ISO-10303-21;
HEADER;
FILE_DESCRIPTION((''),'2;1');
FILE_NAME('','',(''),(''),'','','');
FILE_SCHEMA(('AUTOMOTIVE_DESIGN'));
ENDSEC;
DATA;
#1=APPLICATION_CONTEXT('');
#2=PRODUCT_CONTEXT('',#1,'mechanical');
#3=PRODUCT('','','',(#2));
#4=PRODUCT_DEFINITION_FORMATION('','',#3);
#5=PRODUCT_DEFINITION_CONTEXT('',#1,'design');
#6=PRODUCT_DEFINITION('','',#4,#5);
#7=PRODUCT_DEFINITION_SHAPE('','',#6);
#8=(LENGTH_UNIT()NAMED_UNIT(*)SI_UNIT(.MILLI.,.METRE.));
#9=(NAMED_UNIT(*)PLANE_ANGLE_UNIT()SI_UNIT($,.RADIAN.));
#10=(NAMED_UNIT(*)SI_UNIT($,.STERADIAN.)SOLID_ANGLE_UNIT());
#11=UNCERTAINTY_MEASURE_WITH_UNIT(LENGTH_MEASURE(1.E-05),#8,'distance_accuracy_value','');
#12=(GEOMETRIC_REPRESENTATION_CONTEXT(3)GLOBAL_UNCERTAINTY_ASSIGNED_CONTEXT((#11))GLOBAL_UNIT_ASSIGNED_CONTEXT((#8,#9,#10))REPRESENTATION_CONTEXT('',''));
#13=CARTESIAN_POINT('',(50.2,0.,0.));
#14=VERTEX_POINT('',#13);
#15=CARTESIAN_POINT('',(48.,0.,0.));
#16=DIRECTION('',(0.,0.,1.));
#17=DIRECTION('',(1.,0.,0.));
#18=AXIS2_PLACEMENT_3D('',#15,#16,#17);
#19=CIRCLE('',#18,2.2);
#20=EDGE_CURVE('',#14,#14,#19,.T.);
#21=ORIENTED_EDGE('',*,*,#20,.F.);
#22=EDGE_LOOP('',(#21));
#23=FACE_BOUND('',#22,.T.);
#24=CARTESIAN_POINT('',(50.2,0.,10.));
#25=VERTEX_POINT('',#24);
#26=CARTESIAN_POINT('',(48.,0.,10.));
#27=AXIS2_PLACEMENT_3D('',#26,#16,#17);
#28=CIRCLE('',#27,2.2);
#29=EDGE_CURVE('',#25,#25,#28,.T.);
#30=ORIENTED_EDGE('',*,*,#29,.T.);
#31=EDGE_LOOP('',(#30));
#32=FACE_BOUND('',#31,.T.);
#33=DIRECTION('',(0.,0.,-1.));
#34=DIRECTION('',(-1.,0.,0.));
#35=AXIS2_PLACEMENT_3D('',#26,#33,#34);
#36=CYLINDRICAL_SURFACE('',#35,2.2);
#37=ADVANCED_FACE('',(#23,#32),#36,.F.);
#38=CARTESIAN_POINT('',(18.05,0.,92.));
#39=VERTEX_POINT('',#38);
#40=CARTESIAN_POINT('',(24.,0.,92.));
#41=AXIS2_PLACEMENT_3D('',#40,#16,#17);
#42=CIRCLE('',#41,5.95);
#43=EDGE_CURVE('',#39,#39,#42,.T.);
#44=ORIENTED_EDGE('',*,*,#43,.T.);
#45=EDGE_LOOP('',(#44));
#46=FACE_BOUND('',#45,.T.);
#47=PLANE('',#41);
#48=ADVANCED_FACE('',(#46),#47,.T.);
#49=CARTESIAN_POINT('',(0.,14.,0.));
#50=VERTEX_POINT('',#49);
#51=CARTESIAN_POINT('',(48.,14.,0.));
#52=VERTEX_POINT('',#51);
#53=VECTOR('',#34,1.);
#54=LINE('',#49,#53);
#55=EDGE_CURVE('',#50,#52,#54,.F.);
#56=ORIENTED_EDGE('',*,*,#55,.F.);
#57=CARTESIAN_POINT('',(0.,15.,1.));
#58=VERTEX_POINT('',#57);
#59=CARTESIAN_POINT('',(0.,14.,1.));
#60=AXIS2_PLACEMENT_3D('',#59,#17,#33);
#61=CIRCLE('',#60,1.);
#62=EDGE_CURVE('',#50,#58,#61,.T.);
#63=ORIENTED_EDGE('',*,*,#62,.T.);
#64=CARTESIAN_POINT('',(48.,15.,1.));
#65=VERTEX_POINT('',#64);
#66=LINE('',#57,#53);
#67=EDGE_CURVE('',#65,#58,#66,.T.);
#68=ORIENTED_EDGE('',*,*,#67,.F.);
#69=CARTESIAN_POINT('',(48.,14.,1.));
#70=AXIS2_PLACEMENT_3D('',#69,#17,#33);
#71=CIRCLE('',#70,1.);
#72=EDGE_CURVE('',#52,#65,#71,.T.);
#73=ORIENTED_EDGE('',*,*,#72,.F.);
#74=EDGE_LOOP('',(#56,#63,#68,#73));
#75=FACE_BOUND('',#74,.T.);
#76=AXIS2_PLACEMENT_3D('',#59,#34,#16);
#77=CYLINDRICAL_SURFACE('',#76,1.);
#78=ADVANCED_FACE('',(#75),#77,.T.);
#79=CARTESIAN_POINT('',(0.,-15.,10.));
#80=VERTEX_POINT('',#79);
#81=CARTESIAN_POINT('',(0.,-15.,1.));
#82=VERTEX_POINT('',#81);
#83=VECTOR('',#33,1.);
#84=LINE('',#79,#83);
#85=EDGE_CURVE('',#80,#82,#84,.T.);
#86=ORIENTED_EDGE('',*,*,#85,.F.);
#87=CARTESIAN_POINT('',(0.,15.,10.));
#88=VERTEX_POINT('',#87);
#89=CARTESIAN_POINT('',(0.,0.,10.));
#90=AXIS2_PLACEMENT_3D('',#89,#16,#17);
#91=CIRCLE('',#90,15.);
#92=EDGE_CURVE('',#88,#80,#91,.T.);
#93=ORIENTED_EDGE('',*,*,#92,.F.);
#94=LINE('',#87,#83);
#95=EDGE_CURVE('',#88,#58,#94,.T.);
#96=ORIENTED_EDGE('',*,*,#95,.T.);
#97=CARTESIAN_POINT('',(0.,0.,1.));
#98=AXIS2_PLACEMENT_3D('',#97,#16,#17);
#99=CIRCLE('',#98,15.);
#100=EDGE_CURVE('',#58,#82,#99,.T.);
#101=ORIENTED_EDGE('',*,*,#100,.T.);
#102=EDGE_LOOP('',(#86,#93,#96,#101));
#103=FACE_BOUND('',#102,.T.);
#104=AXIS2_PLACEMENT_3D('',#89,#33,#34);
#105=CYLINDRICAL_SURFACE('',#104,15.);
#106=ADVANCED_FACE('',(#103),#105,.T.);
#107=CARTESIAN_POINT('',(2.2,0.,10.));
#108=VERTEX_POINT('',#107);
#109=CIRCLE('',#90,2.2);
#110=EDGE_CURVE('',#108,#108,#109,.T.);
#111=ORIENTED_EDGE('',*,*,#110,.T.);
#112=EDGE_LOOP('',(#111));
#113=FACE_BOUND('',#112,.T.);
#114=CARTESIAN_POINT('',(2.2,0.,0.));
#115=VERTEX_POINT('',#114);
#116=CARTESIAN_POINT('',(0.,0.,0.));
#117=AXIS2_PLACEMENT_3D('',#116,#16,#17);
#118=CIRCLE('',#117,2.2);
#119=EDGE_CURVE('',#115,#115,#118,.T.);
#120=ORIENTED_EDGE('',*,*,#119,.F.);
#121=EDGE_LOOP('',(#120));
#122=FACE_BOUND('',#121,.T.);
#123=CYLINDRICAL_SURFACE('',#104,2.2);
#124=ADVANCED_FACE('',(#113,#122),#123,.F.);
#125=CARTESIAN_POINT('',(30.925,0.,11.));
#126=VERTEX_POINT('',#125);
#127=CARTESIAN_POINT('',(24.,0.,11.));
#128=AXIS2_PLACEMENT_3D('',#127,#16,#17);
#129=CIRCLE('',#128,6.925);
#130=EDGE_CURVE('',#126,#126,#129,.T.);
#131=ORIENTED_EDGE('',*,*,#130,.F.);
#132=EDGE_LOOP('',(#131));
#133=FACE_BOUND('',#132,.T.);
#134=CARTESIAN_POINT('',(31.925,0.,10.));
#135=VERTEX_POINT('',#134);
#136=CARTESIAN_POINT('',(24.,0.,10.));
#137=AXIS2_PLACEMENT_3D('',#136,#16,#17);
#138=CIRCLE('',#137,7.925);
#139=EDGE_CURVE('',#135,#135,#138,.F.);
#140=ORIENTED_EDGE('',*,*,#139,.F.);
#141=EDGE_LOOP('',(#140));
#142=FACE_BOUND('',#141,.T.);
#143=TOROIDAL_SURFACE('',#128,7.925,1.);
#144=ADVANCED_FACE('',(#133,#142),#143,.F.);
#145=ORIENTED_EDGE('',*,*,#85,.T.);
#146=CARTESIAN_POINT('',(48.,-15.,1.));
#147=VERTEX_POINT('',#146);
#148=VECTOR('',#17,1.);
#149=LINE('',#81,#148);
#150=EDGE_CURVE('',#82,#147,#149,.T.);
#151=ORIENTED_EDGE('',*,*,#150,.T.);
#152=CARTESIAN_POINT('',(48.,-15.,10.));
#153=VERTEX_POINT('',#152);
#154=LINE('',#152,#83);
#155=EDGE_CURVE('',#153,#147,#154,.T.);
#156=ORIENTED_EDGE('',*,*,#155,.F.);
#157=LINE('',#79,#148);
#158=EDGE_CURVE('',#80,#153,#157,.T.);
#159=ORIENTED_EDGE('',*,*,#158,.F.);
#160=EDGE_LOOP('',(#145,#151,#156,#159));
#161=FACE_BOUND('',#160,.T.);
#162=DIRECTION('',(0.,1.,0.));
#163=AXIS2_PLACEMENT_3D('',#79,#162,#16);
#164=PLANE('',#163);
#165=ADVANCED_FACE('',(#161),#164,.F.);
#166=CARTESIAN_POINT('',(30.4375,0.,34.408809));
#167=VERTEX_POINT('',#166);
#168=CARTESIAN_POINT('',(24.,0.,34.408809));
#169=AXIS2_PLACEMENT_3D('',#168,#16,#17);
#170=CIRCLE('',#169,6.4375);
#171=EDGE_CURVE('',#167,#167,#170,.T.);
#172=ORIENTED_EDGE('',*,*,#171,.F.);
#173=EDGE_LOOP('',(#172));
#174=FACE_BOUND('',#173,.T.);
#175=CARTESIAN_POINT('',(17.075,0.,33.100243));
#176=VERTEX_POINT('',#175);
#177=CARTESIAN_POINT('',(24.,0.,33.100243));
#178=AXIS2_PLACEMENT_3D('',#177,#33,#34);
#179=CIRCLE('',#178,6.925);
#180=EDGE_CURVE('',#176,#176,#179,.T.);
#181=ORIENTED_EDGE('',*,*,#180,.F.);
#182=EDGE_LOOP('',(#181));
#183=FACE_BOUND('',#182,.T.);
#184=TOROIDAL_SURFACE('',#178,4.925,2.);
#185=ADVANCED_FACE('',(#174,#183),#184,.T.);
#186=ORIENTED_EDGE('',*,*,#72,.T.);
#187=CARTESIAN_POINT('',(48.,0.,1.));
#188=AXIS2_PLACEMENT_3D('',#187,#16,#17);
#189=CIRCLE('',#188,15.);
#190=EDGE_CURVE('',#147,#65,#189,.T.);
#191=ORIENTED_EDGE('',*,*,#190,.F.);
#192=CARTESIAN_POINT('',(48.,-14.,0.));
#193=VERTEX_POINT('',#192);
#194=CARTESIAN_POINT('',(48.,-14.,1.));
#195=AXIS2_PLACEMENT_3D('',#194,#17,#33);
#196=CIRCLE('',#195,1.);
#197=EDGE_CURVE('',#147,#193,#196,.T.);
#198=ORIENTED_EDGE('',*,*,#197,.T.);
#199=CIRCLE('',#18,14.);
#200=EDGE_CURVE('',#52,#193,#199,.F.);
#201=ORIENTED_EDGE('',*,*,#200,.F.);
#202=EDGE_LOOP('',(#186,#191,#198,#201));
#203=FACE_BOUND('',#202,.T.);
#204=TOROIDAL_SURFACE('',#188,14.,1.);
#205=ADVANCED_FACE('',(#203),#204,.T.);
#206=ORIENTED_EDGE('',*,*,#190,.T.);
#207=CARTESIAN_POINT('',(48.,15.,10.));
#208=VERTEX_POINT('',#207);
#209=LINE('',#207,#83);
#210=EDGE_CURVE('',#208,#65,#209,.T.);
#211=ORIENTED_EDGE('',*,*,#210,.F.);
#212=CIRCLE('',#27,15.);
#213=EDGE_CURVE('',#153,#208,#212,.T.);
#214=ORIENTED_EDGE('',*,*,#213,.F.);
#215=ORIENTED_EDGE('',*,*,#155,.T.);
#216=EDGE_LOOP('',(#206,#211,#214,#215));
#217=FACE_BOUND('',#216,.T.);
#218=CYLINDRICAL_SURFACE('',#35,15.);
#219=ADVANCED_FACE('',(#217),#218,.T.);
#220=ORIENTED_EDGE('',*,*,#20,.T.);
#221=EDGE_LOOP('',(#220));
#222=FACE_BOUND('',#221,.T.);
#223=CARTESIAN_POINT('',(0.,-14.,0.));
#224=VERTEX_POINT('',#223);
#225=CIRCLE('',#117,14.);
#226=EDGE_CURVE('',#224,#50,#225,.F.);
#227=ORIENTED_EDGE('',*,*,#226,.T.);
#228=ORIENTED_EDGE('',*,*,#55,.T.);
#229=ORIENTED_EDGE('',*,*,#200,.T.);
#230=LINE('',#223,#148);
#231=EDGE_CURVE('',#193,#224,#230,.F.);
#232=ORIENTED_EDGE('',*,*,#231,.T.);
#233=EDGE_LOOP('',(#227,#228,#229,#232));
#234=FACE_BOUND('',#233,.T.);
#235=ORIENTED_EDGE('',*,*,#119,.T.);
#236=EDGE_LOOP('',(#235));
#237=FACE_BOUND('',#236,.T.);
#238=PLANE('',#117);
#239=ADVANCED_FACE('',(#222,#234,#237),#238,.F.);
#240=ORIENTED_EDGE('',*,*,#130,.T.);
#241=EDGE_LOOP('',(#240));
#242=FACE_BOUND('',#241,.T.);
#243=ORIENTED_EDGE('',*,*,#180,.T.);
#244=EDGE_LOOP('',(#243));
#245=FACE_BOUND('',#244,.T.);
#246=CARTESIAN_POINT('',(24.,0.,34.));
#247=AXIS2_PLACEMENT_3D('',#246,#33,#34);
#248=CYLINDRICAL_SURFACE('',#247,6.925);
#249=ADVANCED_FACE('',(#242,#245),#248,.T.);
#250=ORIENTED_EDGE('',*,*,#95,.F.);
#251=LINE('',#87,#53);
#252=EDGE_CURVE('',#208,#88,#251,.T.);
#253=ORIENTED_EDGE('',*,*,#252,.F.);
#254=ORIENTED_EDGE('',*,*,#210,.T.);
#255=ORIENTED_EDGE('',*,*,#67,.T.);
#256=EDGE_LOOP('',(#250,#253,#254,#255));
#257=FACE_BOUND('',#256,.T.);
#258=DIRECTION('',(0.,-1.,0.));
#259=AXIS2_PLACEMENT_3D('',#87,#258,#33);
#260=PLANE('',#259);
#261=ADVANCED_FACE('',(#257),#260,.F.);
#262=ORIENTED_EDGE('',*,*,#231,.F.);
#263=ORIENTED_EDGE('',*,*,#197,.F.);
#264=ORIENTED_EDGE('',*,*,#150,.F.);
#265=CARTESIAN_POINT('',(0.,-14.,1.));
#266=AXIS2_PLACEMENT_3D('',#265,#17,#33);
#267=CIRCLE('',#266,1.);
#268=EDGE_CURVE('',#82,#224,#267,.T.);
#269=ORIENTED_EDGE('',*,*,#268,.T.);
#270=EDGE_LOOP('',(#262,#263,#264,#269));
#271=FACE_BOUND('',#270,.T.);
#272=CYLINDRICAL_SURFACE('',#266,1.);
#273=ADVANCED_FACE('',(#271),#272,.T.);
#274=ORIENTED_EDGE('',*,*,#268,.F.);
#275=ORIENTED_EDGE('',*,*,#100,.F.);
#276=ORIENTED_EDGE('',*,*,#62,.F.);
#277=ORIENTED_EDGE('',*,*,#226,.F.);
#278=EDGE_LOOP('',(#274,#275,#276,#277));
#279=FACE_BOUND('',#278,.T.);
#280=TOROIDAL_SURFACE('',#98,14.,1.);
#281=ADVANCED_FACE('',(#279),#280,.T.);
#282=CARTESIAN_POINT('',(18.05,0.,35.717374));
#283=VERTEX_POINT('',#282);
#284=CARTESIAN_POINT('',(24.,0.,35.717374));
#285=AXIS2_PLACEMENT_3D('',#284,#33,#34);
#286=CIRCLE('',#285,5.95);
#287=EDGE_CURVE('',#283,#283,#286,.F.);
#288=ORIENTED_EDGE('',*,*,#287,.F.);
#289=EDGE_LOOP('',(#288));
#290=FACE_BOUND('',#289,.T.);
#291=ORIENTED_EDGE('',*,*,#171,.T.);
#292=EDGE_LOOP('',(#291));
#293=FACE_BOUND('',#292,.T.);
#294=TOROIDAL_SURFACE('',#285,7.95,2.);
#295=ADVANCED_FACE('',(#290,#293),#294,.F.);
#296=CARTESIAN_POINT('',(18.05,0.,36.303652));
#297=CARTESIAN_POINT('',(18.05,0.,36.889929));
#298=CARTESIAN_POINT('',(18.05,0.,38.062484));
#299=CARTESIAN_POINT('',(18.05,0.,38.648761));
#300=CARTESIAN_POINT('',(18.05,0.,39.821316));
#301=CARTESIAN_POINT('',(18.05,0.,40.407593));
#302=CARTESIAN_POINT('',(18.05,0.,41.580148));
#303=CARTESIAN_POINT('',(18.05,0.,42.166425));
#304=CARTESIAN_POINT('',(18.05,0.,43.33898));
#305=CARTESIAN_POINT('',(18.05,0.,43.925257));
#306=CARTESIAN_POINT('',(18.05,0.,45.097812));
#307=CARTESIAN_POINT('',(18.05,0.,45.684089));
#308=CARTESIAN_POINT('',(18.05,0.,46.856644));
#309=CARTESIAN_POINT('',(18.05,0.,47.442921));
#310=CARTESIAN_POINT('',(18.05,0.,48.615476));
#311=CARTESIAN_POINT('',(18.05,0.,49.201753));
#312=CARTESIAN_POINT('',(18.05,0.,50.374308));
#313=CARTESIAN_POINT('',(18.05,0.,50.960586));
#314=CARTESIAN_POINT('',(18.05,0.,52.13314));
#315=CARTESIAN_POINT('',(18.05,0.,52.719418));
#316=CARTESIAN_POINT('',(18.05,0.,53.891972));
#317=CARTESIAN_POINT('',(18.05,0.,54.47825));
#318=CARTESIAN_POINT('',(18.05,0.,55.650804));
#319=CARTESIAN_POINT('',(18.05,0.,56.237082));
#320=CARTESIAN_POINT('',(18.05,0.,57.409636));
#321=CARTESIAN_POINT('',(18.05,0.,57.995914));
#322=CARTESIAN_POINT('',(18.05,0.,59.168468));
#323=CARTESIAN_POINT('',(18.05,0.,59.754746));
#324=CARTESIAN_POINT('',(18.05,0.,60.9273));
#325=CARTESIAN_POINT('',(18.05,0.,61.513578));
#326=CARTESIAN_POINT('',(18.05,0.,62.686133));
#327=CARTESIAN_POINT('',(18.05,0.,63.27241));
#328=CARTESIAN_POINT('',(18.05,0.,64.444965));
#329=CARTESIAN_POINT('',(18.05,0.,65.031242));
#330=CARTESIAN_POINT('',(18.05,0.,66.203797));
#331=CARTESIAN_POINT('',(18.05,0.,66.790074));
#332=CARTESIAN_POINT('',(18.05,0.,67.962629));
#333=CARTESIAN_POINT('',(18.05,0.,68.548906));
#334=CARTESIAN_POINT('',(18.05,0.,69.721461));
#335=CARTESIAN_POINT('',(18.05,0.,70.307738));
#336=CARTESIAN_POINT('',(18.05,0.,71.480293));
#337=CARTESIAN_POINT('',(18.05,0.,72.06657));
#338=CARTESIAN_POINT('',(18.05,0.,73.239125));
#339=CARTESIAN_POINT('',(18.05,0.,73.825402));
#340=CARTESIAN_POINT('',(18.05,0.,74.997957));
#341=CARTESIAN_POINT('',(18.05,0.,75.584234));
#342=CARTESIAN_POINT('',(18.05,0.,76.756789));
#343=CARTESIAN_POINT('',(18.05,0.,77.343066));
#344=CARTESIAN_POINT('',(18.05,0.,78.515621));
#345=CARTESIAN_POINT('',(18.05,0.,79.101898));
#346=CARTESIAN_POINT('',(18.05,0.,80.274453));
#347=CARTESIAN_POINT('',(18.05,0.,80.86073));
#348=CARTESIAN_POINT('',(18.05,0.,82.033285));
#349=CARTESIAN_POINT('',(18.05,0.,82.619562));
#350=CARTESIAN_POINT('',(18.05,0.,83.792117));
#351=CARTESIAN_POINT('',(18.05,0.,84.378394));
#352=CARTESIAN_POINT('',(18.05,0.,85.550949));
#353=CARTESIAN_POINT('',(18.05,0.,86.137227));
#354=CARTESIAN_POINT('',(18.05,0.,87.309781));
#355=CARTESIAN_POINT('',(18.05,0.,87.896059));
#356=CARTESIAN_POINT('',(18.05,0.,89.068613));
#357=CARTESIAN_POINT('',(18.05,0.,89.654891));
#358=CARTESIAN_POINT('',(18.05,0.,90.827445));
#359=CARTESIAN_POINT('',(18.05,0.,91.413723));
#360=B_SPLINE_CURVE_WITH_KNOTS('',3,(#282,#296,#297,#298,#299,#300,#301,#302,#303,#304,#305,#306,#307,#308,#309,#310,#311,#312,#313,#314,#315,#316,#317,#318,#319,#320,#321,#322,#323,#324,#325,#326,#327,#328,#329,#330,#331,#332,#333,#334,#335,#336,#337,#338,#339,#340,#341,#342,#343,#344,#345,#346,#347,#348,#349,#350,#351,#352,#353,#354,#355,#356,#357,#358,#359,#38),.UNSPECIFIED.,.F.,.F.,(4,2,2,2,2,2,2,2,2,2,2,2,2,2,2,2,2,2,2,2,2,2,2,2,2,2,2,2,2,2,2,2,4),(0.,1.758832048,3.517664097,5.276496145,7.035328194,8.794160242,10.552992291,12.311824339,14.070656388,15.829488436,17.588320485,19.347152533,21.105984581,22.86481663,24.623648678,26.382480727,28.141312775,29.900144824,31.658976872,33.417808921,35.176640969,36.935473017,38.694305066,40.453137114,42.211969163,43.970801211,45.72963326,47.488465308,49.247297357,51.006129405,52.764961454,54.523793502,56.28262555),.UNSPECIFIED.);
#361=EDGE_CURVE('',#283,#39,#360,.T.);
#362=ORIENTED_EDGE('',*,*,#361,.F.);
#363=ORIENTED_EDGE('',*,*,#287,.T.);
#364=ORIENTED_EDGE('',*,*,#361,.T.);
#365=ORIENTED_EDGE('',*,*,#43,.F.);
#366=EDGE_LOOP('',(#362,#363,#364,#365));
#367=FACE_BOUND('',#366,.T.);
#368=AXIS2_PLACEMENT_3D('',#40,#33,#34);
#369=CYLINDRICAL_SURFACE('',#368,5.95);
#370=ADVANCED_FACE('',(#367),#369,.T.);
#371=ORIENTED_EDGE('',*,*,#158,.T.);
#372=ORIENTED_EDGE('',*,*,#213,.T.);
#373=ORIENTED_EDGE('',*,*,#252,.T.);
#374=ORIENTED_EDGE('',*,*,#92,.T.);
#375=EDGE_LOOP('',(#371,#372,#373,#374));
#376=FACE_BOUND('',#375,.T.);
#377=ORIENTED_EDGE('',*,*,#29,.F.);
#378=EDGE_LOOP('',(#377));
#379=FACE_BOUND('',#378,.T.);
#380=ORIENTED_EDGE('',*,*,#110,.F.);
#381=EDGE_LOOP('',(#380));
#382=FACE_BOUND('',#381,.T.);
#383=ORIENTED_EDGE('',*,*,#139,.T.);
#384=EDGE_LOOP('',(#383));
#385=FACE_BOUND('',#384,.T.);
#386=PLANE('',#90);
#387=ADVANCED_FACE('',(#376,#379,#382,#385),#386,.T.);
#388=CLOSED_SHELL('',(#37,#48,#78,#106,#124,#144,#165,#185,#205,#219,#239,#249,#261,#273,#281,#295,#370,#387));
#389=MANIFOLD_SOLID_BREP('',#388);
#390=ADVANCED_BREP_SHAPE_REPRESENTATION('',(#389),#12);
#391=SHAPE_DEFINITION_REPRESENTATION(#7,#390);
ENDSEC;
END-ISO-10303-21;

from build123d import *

# Parameters (mm, degrees)
SKETCH1_R           = 2.2
BOSS_EXTRUDE1_DEPTH = 10
SKETCH2_R           = 6.925
BOSS_EXTRUDE2_DEPTH = 24
SKETCH3_R           = 5.95
BOSS_EXTRUDE3_DEPTH = 58
FILLET1_R           = 2
FILLET2_R           = 2
FILLET3_R           = 1
FILLET4_R           = 1


with BuildPart() as part:
    # Sketch1 → Boss-Extrude1 (new body)
    with BuildSketch(Plane.XY):
        with BuildLine():
            Line((0, 15), (48, 15))
            ThreePointArc((48, 15), (63, 0), (48, -15))
            Line((48, -15), (0, -15))
            ThreePointArc((0, -15), (-15, 0), (0, 15))
        make_face()
        Circle(SKETCH1_R, mode=Mode.SUBTRACT)
        with Locations((48, 0)):
            Circle(SKETCH1_R, mode=Mode.SUBTRACT)
    extrude(amount=BOSS_EXTRUDE1_DEPTH)

    # Sketch2 → Boss-Extrude2 (add)
    with BuildSketch(Plane.XY.offset(10)):
        with Locations((24, 0)):
            Circle(SKETCH2_R)
    extrude(amount=BOSS_EXTRUDE2_DEPTH)

    # Sketch3 → Boss-Extrude3 (add)
    with BuildSketch(Plane.XY.offset(34)):
        with Locations(Location((24, 0, 0), (0, 0, 180))):
            Circle(SKETCH3_R)
    extrude(amount=BOSS_EXTRUDE3_DEPTH)

    # Fillet1
    # the kernel refuses this fillet: 2 mm, written as the material it adds along each edge
    with BuildSketch(Plane(origin=(24, 0, 34), x_dir=(-1, 0, 0), z_dir=(0, 1, 0))) as fillet1_piece_1:
        with BuildLine():
            CenterArc((7.95, 1.71737445), FILLET1_R, 180, 59.169502568)
            Line((5.95, 1.71737445), (5.91, 1.71737445))
            Line((5.91, 1.71737445), (5.91, 0))
            Line((5.91, 0), (5.95, -0.04))
            ThreePointArc((5.95, -0.04), (6.4375, -0.04), (6.9045, -0.034347489))
            Line((6.9045, -0.034347489), (6.925, 0))
        make_face()
    revolve(axis=Axis((24, 0, 34), (0, 0, 1)))

    # Fillet2
    fillet2_edges = [part.edges().sort_by_distance(p)[0] for p in [
        (24, -6.925, 34),
    ]]
    fillet(fillet2_edges, radius=FILLET2_R)

    # Fillet3
    fillet3_edges = [part.edges().sort_by_distance(p)[0] for p in [
        (17.075, 0, 10),
    ]]
    fillet(fillet3_edges, radius=FILLET3_R)

    # Fillet4
    fillet4_edges = [part.edges().sort_by_distance(p)[0] for p in [
        (24, 15, 0),
        (63, 0, 0),
        (24, -15, 0),
        (-15, 0, 0),
    ]]
    fillet(fillet4_edges, radius=FILLET4_R)


solid = part.part
